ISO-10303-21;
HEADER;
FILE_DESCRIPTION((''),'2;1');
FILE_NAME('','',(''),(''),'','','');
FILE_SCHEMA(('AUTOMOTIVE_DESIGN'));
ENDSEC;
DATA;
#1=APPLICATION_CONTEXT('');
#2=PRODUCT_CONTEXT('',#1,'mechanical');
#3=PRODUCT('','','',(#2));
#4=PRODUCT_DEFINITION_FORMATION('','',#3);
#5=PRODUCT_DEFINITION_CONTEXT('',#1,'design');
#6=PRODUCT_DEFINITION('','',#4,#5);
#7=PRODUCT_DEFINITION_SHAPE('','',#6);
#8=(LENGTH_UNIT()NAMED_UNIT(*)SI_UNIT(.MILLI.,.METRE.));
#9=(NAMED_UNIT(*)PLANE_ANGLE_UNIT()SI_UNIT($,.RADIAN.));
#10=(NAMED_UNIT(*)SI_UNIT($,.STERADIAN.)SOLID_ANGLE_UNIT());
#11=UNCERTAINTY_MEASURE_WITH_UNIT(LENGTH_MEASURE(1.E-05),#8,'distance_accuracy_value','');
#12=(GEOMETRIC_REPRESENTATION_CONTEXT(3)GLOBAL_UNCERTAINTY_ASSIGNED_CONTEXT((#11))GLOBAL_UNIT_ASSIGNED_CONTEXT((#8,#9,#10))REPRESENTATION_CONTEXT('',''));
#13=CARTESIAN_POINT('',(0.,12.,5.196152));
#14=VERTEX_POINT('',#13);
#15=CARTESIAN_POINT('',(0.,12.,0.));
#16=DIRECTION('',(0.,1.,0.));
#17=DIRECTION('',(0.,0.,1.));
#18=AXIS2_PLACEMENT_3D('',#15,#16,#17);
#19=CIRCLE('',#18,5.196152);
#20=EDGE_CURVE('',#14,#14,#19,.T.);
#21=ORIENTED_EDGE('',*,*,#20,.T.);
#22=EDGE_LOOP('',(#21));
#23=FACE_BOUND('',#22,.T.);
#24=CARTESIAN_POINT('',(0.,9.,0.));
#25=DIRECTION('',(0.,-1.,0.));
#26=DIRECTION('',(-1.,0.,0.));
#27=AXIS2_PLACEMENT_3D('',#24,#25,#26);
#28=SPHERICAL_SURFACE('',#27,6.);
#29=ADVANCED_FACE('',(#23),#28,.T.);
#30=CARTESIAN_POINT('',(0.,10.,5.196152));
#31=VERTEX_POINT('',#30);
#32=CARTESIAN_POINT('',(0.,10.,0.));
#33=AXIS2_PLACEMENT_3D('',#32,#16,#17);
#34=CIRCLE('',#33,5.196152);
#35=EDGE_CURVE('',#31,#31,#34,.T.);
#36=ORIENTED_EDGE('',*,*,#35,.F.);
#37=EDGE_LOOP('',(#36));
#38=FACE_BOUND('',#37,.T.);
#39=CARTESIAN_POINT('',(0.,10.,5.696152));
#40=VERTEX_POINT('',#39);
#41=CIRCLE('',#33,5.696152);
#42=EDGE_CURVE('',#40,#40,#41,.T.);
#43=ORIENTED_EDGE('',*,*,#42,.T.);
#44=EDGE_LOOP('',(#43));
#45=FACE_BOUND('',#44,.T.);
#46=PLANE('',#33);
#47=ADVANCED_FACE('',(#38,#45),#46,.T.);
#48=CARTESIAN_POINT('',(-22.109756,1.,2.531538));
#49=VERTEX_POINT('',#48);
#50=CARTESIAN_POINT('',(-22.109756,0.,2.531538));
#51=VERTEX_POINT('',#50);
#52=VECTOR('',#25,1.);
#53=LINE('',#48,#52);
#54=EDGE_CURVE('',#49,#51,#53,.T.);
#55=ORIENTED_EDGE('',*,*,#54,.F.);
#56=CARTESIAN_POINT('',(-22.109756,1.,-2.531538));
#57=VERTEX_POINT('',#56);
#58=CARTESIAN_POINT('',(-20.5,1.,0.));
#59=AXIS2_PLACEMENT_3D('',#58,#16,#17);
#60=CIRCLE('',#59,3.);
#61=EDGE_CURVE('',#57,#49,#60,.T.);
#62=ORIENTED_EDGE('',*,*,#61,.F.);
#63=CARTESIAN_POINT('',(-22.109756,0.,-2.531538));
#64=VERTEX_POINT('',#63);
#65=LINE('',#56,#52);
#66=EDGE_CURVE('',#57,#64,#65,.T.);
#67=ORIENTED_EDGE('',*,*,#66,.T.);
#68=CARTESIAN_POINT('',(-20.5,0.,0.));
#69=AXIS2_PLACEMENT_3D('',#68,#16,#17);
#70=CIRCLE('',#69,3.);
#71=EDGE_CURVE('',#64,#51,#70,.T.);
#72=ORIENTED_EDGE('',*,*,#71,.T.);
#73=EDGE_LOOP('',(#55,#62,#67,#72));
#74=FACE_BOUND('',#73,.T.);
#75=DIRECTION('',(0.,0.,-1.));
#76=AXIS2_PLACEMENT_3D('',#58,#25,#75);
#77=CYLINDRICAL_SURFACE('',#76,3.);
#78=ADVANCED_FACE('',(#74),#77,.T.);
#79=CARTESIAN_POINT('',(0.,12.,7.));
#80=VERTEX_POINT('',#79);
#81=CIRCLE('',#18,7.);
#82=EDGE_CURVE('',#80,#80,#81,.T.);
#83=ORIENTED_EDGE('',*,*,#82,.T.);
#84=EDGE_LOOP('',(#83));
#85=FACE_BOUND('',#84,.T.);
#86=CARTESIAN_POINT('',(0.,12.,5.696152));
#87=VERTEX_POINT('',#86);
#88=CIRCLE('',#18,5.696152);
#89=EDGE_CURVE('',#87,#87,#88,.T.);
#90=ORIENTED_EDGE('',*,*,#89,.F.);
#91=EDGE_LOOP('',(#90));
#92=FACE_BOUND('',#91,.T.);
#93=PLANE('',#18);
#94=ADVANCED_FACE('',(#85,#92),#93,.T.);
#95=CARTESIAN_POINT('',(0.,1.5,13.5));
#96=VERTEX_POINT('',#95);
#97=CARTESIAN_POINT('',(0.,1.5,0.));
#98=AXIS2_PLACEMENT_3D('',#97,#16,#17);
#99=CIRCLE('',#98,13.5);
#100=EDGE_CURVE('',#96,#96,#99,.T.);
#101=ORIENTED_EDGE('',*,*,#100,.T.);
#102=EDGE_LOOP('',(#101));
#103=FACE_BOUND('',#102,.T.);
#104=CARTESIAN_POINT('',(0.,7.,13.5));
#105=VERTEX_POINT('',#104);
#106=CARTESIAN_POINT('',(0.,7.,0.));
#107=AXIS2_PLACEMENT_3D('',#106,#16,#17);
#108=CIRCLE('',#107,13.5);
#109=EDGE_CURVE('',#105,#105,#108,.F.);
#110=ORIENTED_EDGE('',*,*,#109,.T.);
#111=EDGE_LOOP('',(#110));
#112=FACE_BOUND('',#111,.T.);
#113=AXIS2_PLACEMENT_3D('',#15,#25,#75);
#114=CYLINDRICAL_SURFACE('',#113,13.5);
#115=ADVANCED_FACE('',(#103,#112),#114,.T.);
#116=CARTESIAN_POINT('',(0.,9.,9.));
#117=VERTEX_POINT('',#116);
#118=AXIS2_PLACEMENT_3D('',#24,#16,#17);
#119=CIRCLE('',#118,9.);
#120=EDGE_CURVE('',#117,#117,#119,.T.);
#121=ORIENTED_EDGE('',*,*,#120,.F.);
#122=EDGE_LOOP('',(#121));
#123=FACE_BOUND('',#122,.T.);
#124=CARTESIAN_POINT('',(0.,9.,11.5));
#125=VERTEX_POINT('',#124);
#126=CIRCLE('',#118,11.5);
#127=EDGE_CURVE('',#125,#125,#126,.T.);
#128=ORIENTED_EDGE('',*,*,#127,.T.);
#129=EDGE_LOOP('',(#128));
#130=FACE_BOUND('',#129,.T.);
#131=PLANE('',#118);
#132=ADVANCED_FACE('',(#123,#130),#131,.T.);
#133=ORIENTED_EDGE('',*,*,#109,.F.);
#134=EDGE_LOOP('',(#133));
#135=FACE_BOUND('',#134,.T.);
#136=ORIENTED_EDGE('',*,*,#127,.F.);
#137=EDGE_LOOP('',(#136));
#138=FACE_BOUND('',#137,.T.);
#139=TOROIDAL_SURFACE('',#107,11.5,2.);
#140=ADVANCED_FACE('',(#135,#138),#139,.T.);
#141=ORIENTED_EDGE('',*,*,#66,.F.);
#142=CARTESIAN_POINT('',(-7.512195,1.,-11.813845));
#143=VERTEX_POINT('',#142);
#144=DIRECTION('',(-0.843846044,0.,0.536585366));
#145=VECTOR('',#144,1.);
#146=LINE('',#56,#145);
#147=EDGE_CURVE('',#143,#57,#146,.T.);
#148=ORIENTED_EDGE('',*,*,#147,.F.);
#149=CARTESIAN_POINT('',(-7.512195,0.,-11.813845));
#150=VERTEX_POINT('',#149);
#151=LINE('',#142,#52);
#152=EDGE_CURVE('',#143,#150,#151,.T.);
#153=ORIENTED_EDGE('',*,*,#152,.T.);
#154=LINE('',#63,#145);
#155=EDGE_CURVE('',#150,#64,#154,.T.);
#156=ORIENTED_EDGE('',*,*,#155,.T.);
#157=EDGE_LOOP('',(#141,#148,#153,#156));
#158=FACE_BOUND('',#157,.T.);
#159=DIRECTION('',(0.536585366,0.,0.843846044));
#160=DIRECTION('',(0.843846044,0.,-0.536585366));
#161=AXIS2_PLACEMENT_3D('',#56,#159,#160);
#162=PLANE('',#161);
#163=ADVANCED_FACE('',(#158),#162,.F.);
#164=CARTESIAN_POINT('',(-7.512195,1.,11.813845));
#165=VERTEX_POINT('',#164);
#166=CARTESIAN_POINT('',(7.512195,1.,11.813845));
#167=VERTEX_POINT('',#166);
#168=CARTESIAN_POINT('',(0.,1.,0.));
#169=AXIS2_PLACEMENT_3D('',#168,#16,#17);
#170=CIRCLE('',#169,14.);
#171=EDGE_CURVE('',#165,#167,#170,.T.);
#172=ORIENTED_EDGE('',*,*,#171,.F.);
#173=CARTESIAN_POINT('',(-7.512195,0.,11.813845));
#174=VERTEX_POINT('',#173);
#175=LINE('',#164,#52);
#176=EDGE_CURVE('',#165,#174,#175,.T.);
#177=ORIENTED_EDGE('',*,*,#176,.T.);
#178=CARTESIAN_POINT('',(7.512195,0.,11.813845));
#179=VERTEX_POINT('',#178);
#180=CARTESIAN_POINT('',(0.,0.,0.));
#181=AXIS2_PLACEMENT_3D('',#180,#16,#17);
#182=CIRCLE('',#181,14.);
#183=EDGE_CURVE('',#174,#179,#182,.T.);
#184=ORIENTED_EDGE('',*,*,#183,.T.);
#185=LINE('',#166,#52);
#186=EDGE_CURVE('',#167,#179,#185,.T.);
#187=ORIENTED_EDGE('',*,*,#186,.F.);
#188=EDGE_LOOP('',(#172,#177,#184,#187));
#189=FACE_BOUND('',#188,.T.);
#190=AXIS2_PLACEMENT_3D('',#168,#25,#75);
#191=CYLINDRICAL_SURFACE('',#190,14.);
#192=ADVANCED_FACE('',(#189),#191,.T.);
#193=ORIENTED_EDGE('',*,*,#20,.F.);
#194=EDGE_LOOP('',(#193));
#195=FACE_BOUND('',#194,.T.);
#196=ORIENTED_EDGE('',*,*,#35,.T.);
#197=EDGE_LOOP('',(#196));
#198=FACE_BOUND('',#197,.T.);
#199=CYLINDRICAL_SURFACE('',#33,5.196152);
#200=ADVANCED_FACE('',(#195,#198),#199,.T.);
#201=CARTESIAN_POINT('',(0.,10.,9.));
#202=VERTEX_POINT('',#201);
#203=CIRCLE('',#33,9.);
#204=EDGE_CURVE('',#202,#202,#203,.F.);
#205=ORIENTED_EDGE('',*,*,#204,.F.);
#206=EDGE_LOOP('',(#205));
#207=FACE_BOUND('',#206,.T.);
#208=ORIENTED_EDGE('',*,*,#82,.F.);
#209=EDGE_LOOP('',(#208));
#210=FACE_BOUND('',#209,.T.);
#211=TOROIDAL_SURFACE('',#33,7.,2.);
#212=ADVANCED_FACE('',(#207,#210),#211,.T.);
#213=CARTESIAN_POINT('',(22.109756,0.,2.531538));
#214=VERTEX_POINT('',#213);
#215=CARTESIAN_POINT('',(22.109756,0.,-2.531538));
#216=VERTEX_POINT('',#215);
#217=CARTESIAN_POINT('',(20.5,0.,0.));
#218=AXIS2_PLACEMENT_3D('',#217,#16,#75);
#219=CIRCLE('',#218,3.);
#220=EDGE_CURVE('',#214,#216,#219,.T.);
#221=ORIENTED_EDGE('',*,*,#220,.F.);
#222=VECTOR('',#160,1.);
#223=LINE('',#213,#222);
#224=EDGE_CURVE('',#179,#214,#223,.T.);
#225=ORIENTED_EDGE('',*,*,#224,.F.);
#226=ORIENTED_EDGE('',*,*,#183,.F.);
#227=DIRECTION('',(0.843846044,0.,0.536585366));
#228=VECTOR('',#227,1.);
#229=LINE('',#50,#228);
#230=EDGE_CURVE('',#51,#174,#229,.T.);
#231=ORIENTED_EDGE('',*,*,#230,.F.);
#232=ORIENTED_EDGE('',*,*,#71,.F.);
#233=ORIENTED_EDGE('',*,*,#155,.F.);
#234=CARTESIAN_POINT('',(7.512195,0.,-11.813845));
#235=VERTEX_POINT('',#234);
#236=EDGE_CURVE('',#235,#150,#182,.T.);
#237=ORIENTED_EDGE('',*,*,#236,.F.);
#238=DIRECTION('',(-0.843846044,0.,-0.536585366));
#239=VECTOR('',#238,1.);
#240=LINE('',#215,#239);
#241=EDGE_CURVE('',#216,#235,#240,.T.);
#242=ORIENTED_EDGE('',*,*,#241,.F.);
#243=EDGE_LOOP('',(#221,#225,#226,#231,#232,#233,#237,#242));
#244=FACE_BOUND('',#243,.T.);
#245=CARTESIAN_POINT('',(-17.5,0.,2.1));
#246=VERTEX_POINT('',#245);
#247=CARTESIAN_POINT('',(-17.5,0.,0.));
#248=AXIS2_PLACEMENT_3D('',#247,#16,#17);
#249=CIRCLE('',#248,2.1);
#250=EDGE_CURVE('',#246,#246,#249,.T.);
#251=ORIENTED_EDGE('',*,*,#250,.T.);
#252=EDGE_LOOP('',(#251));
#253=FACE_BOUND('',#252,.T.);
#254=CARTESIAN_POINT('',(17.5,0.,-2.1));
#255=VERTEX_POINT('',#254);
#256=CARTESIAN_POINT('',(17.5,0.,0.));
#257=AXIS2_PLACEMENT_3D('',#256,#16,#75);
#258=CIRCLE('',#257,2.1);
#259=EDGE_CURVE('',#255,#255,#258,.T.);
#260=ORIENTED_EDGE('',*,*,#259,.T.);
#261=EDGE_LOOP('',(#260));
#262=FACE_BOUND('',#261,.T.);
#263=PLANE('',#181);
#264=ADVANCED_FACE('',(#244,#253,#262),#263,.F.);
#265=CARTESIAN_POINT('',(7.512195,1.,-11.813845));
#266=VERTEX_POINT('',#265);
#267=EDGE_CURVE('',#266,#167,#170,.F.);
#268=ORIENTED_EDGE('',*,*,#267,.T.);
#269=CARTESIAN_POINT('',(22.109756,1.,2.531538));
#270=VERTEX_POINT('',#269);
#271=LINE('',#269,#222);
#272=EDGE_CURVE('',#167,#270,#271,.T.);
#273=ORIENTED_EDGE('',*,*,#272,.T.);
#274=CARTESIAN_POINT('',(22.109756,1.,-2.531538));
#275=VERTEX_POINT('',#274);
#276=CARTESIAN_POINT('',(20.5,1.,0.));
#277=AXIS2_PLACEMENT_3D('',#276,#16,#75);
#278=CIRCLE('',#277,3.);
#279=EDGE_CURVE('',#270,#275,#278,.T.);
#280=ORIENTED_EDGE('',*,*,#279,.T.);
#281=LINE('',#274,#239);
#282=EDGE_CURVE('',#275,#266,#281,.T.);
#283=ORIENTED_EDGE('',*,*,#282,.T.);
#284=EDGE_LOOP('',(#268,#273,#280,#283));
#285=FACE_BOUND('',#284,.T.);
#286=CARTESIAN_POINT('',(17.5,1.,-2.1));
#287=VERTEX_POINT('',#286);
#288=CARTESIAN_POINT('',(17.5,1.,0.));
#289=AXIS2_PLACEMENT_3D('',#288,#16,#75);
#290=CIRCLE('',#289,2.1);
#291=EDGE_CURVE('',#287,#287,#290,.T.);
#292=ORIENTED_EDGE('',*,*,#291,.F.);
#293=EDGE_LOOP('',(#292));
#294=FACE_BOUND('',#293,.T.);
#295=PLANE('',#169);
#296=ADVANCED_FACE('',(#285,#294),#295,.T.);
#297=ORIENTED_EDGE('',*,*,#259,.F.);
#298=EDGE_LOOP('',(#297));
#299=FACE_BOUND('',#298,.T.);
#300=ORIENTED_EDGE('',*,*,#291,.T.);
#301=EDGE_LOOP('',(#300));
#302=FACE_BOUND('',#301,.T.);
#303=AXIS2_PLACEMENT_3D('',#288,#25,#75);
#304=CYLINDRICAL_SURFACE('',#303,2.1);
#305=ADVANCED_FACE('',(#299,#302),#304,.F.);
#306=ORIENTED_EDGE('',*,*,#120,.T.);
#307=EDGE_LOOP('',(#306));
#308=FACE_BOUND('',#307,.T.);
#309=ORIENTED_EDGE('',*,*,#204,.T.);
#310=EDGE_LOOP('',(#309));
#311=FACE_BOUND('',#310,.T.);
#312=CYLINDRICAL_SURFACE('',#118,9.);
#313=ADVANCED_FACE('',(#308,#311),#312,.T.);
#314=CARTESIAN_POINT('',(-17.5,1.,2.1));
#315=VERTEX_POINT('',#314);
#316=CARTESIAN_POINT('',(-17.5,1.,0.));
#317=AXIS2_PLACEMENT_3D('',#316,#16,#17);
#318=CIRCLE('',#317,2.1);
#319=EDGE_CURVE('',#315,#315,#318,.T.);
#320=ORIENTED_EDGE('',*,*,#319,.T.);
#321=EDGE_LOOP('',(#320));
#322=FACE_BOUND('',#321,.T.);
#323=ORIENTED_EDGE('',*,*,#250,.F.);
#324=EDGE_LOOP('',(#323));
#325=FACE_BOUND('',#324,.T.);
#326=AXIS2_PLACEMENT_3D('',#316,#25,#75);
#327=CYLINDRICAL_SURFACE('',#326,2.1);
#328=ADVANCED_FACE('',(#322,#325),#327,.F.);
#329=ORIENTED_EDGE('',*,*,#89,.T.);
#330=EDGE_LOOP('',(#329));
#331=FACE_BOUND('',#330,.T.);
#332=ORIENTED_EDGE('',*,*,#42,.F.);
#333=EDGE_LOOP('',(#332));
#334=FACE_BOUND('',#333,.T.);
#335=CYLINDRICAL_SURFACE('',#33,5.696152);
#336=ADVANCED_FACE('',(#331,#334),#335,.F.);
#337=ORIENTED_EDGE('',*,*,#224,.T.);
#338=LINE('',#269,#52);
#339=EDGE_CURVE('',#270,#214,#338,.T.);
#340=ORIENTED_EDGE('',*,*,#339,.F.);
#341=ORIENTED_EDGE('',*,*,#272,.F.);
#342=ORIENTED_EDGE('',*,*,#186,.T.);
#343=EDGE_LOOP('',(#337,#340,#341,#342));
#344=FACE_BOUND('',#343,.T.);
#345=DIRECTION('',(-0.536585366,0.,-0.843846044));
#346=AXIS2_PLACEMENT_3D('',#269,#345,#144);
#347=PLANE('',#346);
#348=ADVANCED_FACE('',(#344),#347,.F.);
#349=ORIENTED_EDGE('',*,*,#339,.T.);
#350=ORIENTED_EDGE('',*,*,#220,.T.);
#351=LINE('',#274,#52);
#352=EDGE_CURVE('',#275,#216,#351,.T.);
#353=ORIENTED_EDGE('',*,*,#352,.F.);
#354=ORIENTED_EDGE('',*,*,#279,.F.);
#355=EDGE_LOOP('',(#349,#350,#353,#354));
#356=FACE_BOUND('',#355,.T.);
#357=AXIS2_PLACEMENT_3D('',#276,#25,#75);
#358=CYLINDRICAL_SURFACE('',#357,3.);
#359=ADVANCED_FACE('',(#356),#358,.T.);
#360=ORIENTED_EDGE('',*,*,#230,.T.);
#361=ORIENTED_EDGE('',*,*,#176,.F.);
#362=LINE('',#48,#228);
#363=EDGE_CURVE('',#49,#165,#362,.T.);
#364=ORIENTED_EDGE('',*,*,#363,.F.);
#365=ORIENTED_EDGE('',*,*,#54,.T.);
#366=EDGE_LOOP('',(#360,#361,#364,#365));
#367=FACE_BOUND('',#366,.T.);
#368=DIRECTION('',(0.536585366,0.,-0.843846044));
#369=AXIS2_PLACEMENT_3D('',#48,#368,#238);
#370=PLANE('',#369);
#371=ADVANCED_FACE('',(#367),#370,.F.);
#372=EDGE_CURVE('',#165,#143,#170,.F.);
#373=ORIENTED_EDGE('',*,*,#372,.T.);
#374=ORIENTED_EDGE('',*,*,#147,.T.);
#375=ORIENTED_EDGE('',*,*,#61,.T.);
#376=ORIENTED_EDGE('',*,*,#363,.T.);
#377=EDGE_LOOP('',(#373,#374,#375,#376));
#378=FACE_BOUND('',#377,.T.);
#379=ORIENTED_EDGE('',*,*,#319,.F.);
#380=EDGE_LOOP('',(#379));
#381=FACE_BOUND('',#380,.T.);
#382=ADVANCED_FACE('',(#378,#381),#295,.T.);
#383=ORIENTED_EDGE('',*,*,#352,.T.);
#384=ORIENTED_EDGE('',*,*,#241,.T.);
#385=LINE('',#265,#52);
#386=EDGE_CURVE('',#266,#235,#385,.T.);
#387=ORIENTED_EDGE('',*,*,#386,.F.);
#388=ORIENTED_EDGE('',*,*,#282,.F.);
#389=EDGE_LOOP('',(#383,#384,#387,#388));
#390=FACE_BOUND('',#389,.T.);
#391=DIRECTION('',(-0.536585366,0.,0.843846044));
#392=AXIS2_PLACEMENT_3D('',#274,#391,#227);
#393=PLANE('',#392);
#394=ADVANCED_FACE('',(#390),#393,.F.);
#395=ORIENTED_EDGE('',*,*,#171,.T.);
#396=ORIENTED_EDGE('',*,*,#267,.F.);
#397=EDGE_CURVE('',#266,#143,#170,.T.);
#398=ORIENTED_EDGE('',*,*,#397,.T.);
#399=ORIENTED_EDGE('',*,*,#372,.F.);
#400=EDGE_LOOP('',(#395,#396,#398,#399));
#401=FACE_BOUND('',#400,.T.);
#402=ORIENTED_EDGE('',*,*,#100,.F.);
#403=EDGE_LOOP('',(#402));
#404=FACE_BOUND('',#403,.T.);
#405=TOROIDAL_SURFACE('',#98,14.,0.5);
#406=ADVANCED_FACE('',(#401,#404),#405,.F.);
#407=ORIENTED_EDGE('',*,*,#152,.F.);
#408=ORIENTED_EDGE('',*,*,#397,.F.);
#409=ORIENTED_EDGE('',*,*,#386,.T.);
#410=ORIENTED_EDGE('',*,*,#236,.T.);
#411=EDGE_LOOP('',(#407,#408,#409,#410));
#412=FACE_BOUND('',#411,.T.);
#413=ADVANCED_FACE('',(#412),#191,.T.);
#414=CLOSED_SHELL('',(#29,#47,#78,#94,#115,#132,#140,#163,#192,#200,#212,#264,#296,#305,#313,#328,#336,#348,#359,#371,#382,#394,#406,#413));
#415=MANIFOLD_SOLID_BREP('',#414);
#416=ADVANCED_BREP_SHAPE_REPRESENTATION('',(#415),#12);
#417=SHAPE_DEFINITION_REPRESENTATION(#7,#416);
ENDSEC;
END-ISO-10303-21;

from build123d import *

# Parameters (mm, degrees)
SKETCH_1_R          = 2.1
EXTRUDE_1_DEPTH     = 1
SKETCH_2_R          = 13.5
EXTRUDE_2_DEPTH     = 11
FILLET_1_R          = 0.5
CUT_EXTRUDE_START   = -3
SKETCH_4_R          = 13.5
SKETCH_4_R_2        = 9
CUT_EXTRUDE_1_DEPTH = 3
FILLET_2_R          = 2
SKETCH_5_R          = 5.696152423
SKETCH_5_R_2        = 5.196152423
CUT_EXTRUDE_2_DEPTH = 2


with BuildPart() as part:
    # 草图1 → 凸台-拉伸1 (new body)
    with BuildSketch(Plane(origin=(0, 0, 0), x_dir=(1, 0, 0), z_dir=(0, 1, 0))):
        with BuildLine():
            Line((-22.109756098, 2.531538131), (-7.512195122, 11.813844609))
            ThreePointArc((-7.512195122, 11.813844609), (0, 14), (7.512195122, 11.813844609))
            Line((7.512195122, 11.813844609), (22.109756098, 2.531538131))
            ThreePointArc((22.109756098, 2.531538131), (23.5, 0), (22.109756098, -2.531538131))
            Line((22.109756098, -2.531538131), (7.512195122, -11.813844609))
            ThreePointArc((7.512195122, -11.813844609), (0, -14), (-7.512195122, -11.813844609))
            Line((-7.512195122, -11.813844609), (-22.109756098, -2.531538131))
            ThreePointArc((-22.109756098, -2.531538131), (-23.5, 0), (-22.109756098, 2.531538131))
        make_face()
        with Locations(Location((-17.5, 0, 0), (0, 0, 270))):
            Circle(SKETCH_1_R, mode=Mode.SUBTRACT)
        with Locations(Location((17.5, 0, 0), (0, 0, 90))):
            Circle(SKETCH_1_R, mode=Mode.SUBTRACT)
    extrude(amount=EXTRUDE_1_DEPTH)

    # 草图2 → 凸台-拉伸2 (add)
    with BuildSketch(Plane(origin=(0, 1, 0), x_dir=(1, 0, 0), z_dir=(0, 1, 0))):
        with Locations(Location((0, 0, 0), (0, 0, 270))):
            Circle(SKETCH_2_R)
    extrude(amount=EXTRUDE_2_DEPTH)

    # 圆角1
    fillet_1_edges = [part.edges().sort_by_distance(p)[0] for p in [
        (0, 1, -13.5),
    ]]
    fillet(fillet_1_edges, radius=FILLET_1_R - 0.0001)  # a hair under: the kernel refuses the full size

    # 草图3 → 旋转1 (revolve)
    with BuildSketch(Plane.XY):
        with BuildLine():
            Line((0, 15), (0, 3))
            ThreePointArc((0, 3), (-6, 9), (0, 15))
        make_face()
    revolve(axis=Axis((0, 0.369509774, 0), (0, 1, 0)))

    # 草图4 → 切除-拉伸1 (cut)
    with BuildSketch(Plane(origin=(0, 12, 0), x_dir=(1, 0, 0), z_dir=(0, 1, 0)).offset(CUT_EXTRUDE_START)):
        with Locations(Location((0, 0, 0), (0, 0, 270))):
            Circle(SKETCH_4_R)
        with Locations(Location((0, 0, 0), (0, 0, 270))):
            Circle(SKETCH_4_R_2, mode=Mode.SUBTRACT)
    extrude(amount=CUT_EXTRUDE_1_DEPTH, mode=Mode.SUBTRACT)

    # 圆角2
    fillet_2_edges = [part.edges().sort_by_distance(p)[0] for p in [
        (0, 9, -13.5),
        (0, 12, -9),
    ]]
    fillet(fillet_2_edges, radius=FILLET_2_R)

    # 草图5 → 切除-拉伸2 (cut)
    with BuildSketch(Plane(origin=(0, 12, 0), x_dir=(1, 0, 0), z_dir=(0, 1, 0))):
        with Locations(Location((0, 0, 0), (0, 0, 270))):
            Circle(SKETCH_5_R)
        with Locations(Location((0, 0, 0), (0, 0, 270))):
            Circle(SKETCH_5_R_2, mode=Mode.SUBTRACT)
    extrude(amount=-CUT_EXTRUDE_2_DEPTH, mode=Mode.SUBTRACT)


solid = part.part
